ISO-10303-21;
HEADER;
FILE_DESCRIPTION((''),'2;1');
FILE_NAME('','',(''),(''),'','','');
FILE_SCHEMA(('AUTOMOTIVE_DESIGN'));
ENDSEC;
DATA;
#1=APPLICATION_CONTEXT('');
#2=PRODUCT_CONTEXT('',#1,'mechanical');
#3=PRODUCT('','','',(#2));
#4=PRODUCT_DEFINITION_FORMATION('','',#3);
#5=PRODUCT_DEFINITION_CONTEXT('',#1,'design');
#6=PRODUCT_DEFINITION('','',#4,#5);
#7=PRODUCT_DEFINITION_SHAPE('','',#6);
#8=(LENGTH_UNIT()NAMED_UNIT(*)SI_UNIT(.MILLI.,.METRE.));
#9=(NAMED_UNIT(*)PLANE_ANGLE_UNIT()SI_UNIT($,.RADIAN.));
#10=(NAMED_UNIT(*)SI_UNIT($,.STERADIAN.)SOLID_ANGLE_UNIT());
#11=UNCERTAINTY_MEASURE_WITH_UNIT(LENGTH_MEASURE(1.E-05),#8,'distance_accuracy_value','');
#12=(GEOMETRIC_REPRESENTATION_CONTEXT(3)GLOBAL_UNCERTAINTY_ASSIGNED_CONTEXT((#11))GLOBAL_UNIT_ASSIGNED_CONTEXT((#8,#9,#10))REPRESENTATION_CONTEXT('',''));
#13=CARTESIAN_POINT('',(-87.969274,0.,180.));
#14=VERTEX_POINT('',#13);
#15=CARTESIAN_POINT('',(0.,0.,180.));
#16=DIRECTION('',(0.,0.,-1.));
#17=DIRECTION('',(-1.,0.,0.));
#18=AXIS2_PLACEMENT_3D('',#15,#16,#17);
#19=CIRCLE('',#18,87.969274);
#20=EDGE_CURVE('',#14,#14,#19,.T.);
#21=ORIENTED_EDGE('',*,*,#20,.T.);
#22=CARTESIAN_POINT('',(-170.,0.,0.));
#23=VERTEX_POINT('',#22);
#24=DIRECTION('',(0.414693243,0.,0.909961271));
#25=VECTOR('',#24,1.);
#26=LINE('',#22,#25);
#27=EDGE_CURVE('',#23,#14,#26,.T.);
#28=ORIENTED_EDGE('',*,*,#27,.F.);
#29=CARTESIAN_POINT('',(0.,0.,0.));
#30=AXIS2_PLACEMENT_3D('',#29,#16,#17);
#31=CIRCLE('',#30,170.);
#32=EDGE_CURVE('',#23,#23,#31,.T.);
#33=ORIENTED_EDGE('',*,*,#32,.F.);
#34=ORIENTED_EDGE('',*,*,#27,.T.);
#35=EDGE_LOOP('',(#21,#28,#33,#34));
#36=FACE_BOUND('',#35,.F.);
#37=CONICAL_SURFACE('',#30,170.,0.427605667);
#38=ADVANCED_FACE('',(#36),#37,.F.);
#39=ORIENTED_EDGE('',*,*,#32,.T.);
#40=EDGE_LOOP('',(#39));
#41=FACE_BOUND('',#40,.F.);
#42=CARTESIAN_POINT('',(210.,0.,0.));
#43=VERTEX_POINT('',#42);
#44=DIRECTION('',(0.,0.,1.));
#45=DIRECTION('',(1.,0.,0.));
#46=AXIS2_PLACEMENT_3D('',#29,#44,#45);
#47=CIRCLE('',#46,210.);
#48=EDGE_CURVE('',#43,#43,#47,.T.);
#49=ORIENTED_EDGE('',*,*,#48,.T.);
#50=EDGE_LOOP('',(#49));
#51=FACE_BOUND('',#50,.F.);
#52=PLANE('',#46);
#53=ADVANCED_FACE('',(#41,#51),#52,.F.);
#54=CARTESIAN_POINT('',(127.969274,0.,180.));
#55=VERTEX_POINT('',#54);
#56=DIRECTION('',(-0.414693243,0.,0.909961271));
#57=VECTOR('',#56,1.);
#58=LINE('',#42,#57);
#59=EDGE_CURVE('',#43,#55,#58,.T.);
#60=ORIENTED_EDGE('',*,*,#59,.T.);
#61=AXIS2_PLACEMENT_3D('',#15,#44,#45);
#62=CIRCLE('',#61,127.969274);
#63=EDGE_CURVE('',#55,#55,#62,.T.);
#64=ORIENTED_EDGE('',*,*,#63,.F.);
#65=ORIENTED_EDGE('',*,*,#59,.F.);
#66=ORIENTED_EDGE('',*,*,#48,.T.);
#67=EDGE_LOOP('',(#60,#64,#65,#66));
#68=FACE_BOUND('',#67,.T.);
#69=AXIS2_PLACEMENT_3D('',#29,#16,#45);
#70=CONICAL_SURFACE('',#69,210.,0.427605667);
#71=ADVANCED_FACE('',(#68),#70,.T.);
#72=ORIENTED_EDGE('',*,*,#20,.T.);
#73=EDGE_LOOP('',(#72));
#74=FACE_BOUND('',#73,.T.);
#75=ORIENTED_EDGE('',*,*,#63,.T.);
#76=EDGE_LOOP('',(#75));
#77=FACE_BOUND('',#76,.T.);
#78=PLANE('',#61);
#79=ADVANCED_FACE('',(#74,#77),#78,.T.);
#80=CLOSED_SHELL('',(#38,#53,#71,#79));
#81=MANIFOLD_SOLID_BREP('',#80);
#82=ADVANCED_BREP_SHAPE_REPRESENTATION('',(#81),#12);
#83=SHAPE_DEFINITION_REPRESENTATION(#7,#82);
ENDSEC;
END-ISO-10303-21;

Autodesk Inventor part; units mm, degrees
ref_plane "YZ Plane" through (0, 0, 0) normal (1, 0, 0) x (0, 1, 0)
ref_plane "XZ Plane" through (0, 0, 0) normal (0, 1, 0) x (-1, 0, 0)
ref_plane "XY Plane" through (0, 0, 0) normal (0, 0, 1) x (1, 0, 0)
sketch "Sketch1" plane through (0, 0, 0) normal (0, 0, 1) x (1, 0, 0)
  circle A0 centre (0, 0) radius 210
  dimension "d0" = 420
extrude "Extrusion1" add sketch "Sketch1" along normal blind 180 draft -24.5
sketch "Sketch3" plane through (0, 0, 180) normal (0, 0, 1) x (1, 0, 0)
  point P0 (0, 0)
sketch "Sketch5" plane through (0, 0, 0) normal (0, 0, -1) x (-1, 0, 0)
  circle A0 centre (0, 0) radius 170
  dimension "d9" = 340
extrude "Extrusion4" cut sketch "Sketch5" against normal blind 250 draft -24.5
properties part number "connection"
